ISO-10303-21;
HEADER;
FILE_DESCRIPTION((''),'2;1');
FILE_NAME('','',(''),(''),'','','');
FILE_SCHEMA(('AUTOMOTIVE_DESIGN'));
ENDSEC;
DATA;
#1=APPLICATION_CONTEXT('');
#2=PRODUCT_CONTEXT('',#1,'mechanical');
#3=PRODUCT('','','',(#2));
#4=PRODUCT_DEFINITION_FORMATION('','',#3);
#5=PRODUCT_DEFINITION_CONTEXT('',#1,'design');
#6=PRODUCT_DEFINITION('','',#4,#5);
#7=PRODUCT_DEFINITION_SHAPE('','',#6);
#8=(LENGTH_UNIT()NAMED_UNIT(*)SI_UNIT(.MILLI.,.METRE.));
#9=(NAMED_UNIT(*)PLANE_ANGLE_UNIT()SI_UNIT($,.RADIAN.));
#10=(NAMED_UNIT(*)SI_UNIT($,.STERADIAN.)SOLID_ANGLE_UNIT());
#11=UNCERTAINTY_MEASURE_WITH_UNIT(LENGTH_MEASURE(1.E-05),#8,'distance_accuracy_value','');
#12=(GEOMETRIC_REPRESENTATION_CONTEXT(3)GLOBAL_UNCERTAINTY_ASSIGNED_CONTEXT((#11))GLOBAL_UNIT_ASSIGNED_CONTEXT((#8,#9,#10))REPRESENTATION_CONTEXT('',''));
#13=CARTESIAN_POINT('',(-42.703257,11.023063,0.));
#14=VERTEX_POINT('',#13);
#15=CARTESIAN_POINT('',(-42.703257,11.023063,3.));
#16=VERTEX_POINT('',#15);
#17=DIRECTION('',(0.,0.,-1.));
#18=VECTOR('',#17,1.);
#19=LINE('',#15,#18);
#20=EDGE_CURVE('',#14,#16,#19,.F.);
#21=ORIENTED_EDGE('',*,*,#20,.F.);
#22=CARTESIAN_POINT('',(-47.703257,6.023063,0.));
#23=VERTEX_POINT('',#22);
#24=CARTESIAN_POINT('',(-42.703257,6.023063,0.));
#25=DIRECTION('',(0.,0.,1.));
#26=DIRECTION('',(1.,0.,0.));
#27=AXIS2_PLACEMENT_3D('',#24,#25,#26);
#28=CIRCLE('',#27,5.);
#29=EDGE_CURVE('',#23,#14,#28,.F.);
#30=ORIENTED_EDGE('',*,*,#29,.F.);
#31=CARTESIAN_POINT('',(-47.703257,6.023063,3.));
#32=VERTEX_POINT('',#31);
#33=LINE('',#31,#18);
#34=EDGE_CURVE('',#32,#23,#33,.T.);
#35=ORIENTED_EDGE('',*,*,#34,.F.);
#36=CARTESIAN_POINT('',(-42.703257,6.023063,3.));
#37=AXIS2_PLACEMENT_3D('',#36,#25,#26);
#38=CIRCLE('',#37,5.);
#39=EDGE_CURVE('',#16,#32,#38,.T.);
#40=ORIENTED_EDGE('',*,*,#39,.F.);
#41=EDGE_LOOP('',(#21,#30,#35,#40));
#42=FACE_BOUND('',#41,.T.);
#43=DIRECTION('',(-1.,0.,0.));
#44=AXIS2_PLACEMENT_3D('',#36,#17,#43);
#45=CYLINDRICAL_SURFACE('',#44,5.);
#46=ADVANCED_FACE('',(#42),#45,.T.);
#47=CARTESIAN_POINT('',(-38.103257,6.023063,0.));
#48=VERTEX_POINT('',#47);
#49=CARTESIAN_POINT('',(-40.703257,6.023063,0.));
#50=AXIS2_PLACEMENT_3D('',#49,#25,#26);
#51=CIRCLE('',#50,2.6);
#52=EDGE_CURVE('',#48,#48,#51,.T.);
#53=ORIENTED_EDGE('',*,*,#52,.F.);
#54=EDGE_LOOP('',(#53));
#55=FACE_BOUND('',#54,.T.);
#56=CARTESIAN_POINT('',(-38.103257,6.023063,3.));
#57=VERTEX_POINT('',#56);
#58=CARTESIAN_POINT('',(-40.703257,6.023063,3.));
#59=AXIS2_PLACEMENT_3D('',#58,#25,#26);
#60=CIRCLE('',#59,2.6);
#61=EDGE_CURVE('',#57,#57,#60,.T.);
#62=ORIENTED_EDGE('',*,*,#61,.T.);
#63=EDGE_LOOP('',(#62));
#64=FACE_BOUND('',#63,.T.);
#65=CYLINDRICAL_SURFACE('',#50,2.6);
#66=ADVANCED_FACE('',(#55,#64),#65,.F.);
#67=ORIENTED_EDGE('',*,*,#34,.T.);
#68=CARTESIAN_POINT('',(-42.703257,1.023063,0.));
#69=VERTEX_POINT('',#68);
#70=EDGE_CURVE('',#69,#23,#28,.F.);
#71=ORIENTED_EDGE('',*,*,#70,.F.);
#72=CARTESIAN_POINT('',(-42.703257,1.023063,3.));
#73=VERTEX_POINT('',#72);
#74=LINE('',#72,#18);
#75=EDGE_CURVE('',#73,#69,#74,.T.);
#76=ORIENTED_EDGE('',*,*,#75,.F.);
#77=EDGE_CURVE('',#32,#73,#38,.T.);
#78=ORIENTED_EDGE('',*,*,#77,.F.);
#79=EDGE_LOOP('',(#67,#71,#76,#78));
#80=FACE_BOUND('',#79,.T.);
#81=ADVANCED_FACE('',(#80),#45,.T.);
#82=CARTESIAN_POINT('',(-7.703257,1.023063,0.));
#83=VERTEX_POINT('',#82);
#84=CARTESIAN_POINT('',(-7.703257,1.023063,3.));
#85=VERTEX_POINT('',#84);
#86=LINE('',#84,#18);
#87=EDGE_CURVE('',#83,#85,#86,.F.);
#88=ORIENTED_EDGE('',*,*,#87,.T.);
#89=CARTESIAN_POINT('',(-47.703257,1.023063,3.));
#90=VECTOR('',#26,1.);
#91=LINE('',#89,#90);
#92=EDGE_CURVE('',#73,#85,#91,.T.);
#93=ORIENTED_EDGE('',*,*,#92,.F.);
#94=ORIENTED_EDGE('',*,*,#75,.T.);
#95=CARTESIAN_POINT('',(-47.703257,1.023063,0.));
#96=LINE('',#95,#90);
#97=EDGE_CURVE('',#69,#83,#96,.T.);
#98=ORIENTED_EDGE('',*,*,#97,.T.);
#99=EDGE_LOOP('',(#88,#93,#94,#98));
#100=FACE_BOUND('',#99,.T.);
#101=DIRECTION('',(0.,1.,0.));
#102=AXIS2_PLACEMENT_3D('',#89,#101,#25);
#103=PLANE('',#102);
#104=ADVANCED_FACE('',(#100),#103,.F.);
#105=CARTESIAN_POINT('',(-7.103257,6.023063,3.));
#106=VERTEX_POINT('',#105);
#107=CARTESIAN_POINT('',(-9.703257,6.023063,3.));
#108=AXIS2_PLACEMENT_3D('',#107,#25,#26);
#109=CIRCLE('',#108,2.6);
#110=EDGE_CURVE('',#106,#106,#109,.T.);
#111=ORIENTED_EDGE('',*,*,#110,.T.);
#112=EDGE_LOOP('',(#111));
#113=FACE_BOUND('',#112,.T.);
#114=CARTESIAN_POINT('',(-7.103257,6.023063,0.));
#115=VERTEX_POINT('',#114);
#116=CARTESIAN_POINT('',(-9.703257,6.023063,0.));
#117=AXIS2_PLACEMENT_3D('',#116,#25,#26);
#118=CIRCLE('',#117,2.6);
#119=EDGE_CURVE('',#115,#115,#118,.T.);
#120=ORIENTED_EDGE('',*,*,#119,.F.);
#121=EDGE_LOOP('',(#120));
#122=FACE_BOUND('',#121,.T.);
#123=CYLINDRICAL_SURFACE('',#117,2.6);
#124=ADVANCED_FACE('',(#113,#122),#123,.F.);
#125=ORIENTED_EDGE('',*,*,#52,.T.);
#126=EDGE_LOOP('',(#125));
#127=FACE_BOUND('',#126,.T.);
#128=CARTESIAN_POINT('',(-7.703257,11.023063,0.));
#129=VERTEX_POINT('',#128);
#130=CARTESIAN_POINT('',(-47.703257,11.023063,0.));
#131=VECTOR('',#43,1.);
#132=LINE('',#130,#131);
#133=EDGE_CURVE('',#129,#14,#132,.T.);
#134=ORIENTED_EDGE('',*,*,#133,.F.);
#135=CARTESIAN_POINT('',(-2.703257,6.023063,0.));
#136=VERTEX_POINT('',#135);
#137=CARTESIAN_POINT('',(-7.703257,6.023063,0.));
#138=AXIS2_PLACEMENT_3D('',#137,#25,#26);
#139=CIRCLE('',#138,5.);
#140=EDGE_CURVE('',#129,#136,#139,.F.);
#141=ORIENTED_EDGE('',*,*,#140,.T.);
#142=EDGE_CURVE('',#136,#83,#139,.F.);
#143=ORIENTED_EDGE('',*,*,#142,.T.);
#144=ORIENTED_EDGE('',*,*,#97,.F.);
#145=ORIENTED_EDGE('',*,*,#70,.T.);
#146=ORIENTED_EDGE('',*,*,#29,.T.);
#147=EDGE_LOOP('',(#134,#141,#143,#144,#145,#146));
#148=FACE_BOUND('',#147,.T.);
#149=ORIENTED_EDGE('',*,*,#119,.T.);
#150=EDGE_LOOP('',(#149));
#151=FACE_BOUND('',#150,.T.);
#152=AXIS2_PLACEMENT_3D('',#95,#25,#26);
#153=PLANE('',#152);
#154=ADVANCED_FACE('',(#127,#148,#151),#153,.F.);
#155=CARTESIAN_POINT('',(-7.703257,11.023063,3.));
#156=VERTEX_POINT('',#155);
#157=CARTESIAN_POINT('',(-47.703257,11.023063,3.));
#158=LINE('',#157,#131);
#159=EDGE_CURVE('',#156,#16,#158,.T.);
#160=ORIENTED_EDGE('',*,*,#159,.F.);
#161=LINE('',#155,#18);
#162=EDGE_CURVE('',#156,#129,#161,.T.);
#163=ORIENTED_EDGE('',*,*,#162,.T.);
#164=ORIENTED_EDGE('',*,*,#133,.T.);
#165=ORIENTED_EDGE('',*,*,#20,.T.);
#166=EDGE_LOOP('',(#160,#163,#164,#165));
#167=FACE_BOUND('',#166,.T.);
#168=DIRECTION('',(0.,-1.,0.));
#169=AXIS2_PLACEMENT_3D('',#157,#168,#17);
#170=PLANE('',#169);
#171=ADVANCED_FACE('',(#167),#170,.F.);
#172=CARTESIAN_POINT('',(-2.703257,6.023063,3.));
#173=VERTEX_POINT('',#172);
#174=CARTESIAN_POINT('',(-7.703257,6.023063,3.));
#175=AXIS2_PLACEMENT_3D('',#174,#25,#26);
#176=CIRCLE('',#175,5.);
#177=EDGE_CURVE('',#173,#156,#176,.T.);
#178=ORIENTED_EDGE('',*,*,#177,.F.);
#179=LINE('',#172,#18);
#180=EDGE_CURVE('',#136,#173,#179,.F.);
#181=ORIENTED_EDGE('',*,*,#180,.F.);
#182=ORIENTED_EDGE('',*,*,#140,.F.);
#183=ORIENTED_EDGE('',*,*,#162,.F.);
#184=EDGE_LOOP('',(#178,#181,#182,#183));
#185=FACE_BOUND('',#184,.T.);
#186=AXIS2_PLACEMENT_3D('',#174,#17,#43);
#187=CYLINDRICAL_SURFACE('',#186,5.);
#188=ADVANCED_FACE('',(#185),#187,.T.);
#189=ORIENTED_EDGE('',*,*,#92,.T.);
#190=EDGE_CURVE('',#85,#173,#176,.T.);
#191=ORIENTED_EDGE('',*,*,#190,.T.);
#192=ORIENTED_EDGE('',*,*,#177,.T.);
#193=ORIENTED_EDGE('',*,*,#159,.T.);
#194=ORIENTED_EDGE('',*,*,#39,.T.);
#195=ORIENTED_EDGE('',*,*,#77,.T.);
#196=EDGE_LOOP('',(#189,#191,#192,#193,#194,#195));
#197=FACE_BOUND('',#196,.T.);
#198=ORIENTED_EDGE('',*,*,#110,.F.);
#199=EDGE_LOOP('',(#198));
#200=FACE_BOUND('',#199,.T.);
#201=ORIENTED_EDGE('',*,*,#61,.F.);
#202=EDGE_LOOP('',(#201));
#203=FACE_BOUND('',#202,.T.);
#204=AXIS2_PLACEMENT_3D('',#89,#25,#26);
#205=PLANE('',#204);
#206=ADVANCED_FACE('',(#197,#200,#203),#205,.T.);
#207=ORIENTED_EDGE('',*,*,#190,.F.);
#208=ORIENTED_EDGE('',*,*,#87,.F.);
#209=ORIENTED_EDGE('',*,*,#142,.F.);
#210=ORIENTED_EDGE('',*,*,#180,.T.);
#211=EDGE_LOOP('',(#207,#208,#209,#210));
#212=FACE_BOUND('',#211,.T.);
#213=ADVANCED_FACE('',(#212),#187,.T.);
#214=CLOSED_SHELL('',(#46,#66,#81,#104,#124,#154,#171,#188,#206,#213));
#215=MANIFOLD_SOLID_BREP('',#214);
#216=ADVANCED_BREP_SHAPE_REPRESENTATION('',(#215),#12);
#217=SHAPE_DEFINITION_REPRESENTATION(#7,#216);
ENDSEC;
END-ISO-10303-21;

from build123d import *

# Parameters (mm, degrees)
ESQUISSE1_W             = 45
ESQUISSE1_H             = 10
EXTRUSION1_DEPTH        = 3
ESQUISSE2_R             = 2.6
ENL_V_MAT_EXTRU_1_DEPTH = 3
CONG_1_R                = 5


with BuildPart() as part:
    # Esquisse1 → Extrusion1 (new body)
    with BuildSketch(Plane.XY):
        with Locations((-25.203257042, 6.02306338)):
            Rectangle(ESQUISSE1_W, ESQUISSE1_H)
    extrude(amount=EXTRUSION1_DEPTH)

    # Esquisse2 → Enlèv. mat.-Extru.1 (cut)
    with BuildSketch(Plane.XY.offset(3)):
        with Locations((-40.703257042, 6.02306338)):
            Circle(ESQUISSE2_R)
        with Locations((-9.703257042, 6.02306338)):
            Circle(ESQUISSE2_R)
    extrude(amount=-ENL_V_MAT_EXTRU_1_DEPTH, mode=Mode.SUBTRACT)

    # Congé1
    cong_1_edges = [part.edges().sort_by_distance(p)[0] for p in [
        (-47.703257042, 1.02306338, 1.5),
        (-2.703257042, 1.02306338, 1.5),
        (-2.703257042, 11.02306338, 1.5),
        (-47.703257042, 11.02306338, 1.5),
    ]]
    fillet(cong_1_edges, radius=CONG_1_R - 0.0001)  # a hair under: the kernel refuses the full size


solid = part.part
